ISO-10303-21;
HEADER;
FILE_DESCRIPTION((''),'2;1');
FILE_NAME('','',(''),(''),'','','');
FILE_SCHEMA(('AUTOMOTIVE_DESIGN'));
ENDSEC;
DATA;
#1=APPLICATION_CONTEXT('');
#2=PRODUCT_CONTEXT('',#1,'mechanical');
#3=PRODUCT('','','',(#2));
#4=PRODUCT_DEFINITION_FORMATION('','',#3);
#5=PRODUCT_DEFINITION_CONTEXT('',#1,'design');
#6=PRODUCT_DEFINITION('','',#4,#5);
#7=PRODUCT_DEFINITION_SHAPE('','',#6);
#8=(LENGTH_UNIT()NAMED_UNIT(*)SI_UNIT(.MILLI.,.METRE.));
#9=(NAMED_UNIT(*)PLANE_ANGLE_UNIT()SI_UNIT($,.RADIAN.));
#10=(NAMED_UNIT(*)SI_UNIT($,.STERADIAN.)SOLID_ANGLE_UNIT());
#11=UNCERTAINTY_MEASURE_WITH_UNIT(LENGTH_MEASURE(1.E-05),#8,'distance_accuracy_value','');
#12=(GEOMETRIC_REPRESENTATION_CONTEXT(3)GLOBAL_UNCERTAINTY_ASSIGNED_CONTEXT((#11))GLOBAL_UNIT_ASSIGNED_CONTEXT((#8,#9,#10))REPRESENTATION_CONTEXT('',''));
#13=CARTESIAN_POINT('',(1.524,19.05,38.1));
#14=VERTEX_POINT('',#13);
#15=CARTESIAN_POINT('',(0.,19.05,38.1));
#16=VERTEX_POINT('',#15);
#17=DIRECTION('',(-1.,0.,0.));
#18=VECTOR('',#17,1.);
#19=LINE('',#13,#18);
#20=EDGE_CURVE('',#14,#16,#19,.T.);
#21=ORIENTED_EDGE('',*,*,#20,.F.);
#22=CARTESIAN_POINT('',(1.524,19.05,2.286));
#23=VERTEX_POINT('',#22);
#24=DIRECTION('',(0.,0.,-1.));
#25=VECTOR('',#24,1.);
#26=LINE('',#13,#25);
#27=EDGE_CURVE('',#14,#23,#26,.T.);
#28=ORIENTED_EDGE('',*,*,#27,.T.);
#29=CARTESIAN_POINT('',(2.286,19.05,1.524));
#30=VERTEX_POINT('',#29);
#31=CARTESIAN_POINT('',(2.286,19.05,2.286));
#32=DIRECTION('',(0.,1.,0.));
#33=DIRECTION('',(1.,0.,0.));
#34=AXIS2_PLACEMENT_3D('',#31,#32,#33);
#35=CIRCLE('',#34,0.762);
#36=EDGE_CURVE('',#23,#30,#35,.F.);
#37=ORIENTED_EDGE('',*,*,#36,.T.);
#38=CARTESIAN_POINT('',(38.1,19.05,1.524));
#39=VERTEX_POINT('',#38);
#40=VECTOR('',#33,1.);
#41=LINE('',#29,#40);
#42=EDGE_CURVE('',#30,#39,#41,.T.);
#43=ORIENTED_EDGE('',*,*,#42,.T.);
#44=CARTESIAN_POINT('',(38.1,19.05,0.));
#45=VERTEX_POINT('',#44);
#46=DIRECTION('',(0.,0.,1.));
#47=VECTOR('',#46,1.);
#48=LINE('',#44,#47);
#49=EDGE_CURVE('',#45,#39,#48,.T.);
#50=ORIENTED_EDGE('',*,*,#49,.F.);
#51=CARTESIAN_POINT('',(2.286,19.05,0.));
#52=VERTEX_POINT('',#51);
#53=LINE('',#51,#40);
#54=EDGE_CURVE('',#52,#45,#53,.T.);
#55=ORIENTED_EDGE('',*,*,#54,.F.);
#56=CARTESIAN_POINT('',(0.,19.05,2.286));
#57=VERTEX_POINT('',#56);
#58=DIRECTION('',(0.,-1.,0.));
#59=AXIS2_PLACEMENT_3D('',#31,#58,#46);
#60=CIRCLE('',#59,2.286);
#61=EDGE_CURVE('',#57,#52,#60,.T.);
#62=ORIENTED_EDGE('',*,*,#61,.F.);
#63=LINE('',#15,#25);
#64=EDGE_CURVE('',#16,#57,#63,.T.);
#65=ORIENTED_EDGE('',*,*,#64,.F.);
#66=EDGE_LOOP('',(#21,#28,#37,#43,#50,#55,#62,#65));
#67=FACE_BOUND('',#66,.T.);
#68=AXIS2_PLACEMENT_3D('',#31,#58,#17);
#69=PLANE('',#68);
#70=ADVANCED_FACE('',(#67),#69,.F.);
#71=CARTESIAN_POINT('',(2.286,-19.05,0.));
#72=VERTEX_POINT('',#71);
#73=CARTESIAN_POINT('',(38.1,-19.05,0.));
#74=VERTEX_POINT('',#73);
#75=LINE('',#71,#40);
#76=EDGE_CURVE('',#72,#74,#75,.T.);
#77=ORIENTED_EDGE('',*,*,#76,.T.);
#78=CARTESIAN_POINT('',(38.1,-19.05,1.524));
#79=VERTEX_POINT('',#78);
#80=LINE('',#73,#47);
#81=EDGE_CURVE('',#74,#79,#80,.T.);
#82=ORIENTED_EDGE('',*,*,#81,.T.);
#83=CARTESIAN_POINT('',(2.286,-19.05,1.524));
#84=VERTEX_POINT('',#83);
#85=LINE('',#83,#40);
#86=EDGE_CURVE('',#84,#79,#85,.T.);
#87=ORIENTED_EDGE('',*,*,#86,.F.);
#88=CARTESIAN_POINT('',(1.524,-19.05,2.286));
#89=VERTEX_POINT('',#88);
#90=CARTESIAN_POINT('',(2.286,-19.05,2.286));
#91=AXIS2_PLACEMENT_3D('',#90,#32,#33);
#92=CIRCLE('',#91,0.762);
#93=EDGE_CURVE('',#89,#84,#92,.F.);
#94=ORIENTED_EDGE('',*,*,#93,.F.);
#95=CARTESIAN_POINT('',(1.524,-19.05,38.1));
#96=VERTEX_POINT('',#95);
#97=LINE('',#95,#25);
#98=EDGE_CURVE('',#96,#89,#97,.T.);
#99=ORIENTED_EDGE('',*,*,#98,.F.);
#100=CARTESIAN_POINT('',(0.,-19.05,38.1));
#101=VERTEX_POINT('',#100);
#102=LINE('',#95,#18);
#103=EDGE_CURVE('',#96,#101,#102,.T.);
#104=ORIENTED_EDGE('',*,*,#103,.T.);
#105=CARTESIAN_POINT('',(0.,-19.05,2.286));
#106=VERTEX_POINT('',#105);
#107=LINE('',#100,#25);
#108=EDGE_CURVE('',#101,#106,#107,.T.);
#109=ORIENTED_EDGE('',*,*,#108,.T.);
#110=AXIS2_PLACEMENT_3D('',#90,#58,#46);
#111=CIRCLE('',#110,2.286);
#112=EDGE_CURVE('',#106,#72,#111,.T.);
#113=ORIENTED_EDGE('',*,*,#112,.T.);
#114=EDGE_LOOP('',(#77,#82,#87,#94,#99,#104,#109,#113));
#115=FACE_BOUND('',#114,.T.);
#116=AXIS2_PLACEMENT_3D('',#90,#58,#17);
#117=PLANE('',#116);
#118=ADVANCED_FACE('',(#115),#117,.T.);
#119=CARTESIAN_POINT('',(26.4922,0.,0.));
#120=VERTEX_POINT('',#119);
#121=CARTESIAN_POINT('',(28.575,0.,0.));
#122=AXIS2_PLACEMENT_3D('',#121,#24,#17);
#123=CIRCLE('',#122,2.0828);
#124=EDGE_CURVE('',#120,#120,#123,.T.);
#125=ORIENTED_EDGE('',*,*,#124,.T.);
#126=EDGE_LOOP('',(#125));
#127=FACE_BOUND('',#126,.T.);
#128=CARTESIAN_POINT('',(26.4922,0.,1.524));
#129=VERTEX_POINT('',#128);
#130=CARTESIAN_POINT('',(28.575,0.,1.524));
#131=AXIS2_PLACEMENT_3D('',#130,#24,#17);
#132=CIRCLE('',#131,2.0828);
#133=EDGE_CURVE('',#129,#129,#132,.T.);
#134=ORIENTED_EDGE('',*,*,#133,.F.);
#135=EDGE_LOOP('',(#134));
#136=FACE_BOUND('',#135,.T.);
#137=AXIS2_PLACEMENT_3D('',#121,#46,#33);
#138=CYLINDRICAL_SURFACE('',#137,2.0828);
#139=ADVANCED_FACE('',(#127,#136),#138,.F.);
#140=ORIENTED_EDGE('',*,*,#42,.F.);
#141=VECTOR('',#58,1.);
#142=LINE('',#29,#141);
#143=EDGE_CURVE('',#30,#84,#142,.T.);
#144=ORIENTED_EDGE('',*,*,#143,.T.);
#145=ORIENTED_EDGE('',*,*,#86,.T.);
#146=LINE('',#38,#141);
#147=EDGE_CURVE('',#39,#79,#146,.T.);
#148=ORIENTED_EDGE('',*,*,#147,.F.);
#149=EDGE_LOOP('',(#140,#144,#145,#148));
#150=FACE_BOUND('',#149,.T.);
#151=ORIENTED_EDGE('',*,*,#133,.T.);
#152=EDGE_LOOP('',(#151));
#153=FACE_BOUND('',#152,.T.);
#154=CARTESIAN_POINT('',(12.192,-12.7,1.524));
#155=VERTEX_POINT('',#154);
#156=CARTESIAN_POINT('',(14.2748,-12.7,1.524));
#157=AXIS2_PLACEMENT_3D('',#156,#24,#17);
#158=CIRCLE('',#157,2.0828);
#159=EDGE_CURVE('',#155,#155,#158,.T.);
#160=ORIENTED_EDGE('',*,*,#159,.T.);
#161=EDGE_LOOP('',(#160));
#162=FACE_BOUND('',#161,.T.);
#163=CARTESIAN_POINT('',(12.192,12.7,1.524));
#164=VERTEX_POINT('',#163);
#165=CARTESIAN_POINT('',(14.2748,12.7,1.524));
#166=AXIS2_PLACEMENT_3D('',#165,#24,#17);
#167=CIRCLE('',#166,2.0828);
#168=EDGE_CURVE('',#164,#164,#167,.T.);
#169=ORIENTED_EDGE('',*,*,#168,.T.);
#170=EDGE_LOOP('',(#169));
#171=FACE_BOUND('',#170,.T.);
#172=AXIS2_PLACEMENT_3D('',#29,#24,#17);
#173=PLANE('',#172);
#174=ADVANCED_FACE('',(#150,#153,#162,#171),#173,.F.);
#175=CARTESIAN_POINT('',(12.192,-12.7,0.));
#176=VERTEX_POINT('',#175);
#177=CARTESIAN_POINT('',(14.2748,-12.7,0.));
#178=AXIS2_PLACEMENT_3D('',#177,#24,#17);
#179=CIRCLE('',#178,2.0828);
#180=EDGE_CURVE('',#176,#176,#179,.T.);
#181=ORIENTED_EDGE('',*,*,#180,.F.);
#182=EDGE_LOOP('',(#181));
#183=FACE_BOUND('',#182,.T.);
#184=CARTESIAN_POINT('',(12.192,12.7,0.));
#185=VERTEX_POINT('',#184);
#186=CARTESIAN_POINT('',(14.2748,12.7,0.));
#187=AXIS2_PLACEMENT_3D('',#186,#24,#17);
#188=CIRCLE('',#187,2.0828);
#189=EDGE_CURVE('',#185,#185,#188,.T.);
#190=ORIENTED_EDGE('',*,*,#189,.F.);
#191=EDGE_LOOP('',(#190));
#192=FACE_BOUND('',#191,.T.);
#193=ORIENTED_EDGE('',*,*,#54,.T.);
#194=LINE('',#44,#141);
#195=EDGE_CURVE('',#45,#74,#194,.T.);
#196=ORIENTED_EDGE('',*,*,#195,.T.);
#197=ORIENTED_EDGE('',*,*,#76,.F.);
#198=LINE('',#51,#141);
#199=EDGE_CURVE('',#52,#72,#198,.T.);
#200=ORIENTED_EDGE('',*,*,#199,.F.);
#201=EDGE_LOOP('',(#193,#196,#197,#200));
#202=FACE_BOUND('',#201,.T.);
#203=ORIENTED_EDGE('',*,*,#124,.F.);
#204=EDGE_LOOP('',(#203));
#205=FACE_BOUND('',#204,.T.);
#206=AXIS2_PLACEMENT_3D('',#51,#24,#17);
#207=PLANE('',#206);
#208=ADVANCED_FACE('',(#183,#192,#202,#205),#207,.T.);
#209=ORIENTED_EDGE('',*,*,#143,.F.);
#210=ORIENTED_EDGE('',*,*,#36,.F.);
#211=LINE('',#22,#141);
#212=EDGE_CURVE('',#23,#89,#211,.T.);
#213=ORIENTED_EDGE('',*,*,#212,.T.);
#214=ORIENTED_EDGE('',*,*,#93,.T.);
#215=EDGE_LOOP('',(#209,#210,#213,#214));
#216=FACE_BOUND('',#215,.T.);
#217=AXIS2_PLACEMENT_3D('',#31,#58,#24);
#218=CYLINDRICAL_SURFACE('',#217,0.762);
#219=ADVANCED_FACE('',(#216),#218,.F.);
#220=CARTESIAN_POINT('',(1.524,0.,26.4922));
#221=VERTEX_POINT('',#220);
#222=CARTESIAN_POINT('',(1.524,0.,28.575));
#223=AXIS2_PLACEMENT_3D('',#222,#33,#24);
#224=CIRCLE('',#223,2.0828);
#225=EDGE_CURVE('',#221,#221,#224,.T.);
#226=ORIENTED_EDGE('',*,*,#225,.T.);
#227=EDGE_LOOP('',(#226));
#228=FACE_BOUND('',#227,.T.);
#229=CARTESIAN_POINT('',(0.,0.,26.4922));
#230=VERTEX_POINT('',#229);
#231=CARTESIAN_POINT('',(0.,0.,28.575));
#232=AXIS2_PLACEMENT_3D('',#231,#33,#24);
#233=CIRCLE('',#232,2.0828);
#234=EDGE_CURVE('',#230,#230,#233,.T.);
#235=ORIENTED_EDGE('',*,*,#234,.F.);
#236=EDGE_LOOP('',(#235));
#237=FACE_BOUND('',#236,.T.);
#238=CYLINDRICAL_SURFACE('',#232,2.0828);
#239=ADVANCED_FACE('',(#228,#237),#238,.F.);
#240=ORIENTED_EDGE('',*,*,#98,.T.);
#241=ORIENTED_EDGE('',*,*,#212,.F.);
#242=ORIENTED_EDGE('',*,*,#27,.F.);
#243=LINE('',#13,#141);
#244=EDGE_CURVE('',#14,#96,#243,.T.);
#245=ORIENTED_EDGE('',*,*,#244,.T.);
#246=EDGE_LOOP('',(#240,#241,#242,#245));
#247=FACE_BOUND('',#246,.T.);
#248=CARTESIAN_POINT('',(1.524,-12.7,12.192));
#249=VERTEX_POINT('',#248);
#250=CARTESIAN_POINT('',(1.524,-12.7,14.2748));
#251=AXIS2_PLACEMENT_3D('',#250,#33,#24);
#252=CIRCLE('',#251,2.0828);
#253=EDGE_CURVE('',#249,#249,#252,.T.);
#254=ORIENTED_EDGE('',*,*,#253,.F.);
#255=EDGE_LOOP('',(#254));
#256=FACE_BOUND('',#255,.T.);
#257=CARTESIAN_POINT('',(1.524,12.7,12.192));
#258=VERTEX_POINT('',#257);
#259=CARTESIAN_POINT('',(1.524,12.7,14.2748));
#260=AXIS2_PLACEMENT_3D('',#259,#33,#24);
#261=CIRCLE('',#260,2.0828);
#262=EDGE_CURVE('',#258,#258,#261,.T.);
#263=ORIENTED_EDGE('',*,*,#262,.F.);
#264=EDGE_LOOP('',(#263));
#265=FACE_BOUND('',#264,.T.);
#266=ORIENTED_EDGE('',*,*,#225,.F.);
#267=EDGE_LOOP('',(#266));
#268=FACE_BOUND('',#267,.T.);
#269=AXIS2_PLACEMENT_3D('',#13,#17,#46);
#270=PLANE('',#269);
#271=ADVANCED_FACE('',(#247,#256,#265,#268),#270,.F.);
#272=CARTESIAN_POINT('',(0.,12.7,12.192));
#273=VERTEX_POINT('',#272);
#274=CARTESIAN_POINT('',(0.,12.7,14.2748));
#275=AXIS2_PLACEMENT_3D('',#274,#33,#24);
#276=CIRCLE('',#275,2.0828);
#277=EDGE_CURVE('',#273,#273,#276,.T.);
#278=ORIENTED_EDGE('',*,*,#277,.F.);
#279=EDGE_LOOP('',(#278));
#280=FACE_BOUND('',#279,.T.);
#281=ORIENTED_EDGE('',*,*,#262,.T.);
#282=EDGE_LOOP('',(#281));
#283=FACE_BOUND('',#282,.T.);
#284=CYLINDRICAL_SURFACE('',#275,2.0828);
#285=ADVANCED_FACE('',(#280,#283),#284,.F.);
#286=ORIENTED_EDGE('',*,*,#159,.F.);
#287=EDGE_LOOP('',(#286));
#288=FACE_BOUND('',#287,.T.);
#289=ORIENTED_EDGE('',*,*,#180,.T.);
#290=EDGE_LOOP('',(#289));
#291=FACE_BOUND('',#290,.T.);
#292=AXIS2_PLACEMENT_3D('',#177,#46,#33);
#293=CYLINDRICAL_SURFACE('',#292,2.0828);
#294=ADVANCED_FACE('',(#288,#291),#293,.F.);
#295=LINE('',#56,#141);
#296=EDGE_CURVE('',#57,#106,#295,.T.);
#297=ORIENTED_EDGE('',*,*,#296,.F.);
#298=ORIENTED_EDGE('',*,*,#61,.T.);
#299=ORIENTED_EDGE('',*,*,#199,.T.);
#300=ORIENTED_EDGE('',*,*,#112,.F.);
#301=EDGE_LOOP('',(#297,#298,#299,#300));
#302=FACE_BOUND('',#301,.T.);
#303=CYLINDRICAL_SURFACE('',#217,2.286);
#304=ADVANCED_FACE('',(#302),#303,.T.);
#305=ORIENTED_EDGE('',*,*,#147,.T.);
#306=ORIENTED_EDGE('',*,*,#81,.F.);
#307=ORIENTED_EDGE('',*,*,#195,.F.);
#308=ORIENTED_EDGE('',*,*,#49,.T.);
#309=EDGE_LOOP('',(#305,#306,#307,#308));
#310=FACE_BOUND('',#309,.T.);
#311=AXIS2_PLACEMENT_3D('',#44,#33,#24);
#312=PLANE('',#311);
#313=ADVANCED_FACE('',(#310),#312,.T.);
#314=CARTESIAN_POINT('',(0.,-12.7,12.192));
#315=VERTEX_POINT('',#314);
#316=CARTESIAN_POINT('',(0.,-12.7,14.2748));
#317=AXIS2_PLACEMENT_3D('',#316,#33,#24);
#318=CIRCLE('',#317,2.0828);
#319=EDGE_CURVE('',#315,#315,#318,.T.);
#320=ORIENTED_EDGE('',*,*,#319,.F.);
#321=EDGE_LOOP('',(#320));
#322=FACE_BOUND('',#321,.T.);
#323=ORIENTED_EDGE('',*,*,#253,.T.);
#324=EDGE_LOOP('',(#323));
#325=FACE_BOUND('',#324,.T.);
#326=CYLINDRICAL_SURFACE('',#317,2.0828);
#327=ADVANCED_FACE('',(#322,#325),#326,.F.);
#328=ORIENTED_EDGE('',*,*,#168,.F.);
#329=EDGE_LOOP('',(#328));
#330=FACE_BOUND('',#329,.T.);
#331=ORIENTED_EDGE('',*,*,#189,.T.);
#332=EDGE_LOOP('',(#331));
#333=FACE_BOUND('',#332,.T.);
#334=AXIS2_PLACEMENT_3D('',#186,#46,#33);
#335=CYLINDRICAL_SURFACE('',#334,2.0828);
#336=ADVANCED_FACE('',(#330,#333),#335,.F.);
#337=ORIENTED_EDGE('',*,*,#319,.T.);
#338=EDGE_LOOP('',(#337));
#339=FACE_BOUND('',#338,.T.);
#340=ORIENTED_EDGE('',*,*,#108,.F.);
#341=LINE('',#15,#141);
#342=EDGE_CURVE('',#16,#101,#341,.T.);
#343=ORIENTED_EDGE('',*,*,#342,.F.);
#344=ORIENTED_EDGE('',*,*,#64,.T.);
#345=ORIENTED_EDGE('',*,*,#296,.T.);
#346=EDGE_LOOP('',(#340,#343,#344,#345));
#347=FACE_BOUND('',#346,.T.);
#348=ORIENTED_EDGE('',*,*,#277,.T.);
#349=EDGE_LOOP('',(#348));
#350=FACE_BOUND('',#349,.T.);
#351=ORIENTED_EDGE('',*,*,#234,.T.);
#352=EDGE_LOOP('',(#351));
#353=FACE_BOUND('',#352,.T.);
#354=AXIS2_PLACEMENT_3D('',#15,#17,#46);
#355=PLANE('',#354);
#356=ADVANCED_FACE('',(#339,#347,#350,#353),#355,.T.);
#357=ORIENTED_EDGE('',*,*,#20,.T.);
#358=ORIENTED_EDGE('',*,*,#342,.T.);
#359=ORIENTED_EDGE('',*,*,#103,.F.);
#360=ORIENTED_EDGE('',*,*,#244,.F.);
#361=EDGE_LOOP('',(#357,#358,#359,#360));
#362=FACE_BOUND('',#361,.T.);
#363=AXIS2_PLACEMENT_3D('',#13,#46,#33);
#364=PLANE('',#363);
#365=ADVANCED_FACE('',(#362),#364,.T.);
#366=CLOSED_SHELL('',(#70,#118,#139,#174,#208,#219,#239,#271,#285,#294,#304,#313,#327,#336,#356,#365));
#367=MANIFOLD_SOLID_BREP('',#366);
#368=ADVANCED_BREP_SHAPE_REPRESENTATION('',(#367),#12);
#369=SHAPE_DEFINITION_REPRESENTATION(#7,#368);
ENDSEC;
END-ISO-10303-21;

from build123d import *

# Parameters (mm, degrees)
EXTRUDE_THIN1_START = -19.05
EXTRUDE_THIN1_DEPTH = 38.1
SKETCH4_R           = 2.0828
EXTRUDE3_DEPTH      = 57.145492036


# Read off the part's stored shape, not the designer's step: Extrude-Thin1
with BuildPart() as part:
    # Extrude-Thin1 outline → Extrude-Thin1 (new body)
    with BuildSketch(Plane(origin=(0, 0, 0), x_dir=(1, 0, 0), z_dir=(0, 1, 0)).offset(EXTRUDE_THIN1_START)):
        with BuildLine():
            Line((2.286, -1.524), (38.1, -1.524))
            Line((38.1, -1.524), (38.1, 0))
            Line((38.1, 0), (2.286, 0))
            ThreePointArc((2.286, 0), (0.669553898, -0.669553898), (0, -2.286))
            Line((0, -2.286), (0, -38.1))
            Line((0, -38.1), (1.524, -38.1))
            Line((1.524, -38.1), (1.524, -2.286))
            ThreePointArc((1.524, -2.286), (1.747184633, -1.747184633), (2.286, -1.524))
        make_face()
    extrude(amount=EXTRUDE_THIN1_DEPTH)

    # Sketch4 → Extrude3 (cut, through all)
    with BuildSketch(Plane(origin=(1.524, 0, 0), x_dir=(0, 0, -1), z_dir=(1, 0, 0))):
        with Locations((-28.575, 0)):
            Circle(SKETCH4_R)
        with Locations((-14.2748, 12.7)):
            Circle(SKETCH4_R)
        with Locations((-14.2748, -12.7)):
            Circle(SKETCH4_R)
    extrude3 = extrude(amount=-EXTRUDE3_DEPTH, mode=Mode.SUBTRACT)

    # Mirror1: Extrude3 across plane
    add(extrude3.mirror(Plane(origin=(0, 0, 0), x_dir=(0.7071067811865465, 0, 0.7071067811865486), z_dir=(-0.7071067811865488, 0, 0.7071067811865464))), mode=Mode.SUBTRACT)


solid = part.part
